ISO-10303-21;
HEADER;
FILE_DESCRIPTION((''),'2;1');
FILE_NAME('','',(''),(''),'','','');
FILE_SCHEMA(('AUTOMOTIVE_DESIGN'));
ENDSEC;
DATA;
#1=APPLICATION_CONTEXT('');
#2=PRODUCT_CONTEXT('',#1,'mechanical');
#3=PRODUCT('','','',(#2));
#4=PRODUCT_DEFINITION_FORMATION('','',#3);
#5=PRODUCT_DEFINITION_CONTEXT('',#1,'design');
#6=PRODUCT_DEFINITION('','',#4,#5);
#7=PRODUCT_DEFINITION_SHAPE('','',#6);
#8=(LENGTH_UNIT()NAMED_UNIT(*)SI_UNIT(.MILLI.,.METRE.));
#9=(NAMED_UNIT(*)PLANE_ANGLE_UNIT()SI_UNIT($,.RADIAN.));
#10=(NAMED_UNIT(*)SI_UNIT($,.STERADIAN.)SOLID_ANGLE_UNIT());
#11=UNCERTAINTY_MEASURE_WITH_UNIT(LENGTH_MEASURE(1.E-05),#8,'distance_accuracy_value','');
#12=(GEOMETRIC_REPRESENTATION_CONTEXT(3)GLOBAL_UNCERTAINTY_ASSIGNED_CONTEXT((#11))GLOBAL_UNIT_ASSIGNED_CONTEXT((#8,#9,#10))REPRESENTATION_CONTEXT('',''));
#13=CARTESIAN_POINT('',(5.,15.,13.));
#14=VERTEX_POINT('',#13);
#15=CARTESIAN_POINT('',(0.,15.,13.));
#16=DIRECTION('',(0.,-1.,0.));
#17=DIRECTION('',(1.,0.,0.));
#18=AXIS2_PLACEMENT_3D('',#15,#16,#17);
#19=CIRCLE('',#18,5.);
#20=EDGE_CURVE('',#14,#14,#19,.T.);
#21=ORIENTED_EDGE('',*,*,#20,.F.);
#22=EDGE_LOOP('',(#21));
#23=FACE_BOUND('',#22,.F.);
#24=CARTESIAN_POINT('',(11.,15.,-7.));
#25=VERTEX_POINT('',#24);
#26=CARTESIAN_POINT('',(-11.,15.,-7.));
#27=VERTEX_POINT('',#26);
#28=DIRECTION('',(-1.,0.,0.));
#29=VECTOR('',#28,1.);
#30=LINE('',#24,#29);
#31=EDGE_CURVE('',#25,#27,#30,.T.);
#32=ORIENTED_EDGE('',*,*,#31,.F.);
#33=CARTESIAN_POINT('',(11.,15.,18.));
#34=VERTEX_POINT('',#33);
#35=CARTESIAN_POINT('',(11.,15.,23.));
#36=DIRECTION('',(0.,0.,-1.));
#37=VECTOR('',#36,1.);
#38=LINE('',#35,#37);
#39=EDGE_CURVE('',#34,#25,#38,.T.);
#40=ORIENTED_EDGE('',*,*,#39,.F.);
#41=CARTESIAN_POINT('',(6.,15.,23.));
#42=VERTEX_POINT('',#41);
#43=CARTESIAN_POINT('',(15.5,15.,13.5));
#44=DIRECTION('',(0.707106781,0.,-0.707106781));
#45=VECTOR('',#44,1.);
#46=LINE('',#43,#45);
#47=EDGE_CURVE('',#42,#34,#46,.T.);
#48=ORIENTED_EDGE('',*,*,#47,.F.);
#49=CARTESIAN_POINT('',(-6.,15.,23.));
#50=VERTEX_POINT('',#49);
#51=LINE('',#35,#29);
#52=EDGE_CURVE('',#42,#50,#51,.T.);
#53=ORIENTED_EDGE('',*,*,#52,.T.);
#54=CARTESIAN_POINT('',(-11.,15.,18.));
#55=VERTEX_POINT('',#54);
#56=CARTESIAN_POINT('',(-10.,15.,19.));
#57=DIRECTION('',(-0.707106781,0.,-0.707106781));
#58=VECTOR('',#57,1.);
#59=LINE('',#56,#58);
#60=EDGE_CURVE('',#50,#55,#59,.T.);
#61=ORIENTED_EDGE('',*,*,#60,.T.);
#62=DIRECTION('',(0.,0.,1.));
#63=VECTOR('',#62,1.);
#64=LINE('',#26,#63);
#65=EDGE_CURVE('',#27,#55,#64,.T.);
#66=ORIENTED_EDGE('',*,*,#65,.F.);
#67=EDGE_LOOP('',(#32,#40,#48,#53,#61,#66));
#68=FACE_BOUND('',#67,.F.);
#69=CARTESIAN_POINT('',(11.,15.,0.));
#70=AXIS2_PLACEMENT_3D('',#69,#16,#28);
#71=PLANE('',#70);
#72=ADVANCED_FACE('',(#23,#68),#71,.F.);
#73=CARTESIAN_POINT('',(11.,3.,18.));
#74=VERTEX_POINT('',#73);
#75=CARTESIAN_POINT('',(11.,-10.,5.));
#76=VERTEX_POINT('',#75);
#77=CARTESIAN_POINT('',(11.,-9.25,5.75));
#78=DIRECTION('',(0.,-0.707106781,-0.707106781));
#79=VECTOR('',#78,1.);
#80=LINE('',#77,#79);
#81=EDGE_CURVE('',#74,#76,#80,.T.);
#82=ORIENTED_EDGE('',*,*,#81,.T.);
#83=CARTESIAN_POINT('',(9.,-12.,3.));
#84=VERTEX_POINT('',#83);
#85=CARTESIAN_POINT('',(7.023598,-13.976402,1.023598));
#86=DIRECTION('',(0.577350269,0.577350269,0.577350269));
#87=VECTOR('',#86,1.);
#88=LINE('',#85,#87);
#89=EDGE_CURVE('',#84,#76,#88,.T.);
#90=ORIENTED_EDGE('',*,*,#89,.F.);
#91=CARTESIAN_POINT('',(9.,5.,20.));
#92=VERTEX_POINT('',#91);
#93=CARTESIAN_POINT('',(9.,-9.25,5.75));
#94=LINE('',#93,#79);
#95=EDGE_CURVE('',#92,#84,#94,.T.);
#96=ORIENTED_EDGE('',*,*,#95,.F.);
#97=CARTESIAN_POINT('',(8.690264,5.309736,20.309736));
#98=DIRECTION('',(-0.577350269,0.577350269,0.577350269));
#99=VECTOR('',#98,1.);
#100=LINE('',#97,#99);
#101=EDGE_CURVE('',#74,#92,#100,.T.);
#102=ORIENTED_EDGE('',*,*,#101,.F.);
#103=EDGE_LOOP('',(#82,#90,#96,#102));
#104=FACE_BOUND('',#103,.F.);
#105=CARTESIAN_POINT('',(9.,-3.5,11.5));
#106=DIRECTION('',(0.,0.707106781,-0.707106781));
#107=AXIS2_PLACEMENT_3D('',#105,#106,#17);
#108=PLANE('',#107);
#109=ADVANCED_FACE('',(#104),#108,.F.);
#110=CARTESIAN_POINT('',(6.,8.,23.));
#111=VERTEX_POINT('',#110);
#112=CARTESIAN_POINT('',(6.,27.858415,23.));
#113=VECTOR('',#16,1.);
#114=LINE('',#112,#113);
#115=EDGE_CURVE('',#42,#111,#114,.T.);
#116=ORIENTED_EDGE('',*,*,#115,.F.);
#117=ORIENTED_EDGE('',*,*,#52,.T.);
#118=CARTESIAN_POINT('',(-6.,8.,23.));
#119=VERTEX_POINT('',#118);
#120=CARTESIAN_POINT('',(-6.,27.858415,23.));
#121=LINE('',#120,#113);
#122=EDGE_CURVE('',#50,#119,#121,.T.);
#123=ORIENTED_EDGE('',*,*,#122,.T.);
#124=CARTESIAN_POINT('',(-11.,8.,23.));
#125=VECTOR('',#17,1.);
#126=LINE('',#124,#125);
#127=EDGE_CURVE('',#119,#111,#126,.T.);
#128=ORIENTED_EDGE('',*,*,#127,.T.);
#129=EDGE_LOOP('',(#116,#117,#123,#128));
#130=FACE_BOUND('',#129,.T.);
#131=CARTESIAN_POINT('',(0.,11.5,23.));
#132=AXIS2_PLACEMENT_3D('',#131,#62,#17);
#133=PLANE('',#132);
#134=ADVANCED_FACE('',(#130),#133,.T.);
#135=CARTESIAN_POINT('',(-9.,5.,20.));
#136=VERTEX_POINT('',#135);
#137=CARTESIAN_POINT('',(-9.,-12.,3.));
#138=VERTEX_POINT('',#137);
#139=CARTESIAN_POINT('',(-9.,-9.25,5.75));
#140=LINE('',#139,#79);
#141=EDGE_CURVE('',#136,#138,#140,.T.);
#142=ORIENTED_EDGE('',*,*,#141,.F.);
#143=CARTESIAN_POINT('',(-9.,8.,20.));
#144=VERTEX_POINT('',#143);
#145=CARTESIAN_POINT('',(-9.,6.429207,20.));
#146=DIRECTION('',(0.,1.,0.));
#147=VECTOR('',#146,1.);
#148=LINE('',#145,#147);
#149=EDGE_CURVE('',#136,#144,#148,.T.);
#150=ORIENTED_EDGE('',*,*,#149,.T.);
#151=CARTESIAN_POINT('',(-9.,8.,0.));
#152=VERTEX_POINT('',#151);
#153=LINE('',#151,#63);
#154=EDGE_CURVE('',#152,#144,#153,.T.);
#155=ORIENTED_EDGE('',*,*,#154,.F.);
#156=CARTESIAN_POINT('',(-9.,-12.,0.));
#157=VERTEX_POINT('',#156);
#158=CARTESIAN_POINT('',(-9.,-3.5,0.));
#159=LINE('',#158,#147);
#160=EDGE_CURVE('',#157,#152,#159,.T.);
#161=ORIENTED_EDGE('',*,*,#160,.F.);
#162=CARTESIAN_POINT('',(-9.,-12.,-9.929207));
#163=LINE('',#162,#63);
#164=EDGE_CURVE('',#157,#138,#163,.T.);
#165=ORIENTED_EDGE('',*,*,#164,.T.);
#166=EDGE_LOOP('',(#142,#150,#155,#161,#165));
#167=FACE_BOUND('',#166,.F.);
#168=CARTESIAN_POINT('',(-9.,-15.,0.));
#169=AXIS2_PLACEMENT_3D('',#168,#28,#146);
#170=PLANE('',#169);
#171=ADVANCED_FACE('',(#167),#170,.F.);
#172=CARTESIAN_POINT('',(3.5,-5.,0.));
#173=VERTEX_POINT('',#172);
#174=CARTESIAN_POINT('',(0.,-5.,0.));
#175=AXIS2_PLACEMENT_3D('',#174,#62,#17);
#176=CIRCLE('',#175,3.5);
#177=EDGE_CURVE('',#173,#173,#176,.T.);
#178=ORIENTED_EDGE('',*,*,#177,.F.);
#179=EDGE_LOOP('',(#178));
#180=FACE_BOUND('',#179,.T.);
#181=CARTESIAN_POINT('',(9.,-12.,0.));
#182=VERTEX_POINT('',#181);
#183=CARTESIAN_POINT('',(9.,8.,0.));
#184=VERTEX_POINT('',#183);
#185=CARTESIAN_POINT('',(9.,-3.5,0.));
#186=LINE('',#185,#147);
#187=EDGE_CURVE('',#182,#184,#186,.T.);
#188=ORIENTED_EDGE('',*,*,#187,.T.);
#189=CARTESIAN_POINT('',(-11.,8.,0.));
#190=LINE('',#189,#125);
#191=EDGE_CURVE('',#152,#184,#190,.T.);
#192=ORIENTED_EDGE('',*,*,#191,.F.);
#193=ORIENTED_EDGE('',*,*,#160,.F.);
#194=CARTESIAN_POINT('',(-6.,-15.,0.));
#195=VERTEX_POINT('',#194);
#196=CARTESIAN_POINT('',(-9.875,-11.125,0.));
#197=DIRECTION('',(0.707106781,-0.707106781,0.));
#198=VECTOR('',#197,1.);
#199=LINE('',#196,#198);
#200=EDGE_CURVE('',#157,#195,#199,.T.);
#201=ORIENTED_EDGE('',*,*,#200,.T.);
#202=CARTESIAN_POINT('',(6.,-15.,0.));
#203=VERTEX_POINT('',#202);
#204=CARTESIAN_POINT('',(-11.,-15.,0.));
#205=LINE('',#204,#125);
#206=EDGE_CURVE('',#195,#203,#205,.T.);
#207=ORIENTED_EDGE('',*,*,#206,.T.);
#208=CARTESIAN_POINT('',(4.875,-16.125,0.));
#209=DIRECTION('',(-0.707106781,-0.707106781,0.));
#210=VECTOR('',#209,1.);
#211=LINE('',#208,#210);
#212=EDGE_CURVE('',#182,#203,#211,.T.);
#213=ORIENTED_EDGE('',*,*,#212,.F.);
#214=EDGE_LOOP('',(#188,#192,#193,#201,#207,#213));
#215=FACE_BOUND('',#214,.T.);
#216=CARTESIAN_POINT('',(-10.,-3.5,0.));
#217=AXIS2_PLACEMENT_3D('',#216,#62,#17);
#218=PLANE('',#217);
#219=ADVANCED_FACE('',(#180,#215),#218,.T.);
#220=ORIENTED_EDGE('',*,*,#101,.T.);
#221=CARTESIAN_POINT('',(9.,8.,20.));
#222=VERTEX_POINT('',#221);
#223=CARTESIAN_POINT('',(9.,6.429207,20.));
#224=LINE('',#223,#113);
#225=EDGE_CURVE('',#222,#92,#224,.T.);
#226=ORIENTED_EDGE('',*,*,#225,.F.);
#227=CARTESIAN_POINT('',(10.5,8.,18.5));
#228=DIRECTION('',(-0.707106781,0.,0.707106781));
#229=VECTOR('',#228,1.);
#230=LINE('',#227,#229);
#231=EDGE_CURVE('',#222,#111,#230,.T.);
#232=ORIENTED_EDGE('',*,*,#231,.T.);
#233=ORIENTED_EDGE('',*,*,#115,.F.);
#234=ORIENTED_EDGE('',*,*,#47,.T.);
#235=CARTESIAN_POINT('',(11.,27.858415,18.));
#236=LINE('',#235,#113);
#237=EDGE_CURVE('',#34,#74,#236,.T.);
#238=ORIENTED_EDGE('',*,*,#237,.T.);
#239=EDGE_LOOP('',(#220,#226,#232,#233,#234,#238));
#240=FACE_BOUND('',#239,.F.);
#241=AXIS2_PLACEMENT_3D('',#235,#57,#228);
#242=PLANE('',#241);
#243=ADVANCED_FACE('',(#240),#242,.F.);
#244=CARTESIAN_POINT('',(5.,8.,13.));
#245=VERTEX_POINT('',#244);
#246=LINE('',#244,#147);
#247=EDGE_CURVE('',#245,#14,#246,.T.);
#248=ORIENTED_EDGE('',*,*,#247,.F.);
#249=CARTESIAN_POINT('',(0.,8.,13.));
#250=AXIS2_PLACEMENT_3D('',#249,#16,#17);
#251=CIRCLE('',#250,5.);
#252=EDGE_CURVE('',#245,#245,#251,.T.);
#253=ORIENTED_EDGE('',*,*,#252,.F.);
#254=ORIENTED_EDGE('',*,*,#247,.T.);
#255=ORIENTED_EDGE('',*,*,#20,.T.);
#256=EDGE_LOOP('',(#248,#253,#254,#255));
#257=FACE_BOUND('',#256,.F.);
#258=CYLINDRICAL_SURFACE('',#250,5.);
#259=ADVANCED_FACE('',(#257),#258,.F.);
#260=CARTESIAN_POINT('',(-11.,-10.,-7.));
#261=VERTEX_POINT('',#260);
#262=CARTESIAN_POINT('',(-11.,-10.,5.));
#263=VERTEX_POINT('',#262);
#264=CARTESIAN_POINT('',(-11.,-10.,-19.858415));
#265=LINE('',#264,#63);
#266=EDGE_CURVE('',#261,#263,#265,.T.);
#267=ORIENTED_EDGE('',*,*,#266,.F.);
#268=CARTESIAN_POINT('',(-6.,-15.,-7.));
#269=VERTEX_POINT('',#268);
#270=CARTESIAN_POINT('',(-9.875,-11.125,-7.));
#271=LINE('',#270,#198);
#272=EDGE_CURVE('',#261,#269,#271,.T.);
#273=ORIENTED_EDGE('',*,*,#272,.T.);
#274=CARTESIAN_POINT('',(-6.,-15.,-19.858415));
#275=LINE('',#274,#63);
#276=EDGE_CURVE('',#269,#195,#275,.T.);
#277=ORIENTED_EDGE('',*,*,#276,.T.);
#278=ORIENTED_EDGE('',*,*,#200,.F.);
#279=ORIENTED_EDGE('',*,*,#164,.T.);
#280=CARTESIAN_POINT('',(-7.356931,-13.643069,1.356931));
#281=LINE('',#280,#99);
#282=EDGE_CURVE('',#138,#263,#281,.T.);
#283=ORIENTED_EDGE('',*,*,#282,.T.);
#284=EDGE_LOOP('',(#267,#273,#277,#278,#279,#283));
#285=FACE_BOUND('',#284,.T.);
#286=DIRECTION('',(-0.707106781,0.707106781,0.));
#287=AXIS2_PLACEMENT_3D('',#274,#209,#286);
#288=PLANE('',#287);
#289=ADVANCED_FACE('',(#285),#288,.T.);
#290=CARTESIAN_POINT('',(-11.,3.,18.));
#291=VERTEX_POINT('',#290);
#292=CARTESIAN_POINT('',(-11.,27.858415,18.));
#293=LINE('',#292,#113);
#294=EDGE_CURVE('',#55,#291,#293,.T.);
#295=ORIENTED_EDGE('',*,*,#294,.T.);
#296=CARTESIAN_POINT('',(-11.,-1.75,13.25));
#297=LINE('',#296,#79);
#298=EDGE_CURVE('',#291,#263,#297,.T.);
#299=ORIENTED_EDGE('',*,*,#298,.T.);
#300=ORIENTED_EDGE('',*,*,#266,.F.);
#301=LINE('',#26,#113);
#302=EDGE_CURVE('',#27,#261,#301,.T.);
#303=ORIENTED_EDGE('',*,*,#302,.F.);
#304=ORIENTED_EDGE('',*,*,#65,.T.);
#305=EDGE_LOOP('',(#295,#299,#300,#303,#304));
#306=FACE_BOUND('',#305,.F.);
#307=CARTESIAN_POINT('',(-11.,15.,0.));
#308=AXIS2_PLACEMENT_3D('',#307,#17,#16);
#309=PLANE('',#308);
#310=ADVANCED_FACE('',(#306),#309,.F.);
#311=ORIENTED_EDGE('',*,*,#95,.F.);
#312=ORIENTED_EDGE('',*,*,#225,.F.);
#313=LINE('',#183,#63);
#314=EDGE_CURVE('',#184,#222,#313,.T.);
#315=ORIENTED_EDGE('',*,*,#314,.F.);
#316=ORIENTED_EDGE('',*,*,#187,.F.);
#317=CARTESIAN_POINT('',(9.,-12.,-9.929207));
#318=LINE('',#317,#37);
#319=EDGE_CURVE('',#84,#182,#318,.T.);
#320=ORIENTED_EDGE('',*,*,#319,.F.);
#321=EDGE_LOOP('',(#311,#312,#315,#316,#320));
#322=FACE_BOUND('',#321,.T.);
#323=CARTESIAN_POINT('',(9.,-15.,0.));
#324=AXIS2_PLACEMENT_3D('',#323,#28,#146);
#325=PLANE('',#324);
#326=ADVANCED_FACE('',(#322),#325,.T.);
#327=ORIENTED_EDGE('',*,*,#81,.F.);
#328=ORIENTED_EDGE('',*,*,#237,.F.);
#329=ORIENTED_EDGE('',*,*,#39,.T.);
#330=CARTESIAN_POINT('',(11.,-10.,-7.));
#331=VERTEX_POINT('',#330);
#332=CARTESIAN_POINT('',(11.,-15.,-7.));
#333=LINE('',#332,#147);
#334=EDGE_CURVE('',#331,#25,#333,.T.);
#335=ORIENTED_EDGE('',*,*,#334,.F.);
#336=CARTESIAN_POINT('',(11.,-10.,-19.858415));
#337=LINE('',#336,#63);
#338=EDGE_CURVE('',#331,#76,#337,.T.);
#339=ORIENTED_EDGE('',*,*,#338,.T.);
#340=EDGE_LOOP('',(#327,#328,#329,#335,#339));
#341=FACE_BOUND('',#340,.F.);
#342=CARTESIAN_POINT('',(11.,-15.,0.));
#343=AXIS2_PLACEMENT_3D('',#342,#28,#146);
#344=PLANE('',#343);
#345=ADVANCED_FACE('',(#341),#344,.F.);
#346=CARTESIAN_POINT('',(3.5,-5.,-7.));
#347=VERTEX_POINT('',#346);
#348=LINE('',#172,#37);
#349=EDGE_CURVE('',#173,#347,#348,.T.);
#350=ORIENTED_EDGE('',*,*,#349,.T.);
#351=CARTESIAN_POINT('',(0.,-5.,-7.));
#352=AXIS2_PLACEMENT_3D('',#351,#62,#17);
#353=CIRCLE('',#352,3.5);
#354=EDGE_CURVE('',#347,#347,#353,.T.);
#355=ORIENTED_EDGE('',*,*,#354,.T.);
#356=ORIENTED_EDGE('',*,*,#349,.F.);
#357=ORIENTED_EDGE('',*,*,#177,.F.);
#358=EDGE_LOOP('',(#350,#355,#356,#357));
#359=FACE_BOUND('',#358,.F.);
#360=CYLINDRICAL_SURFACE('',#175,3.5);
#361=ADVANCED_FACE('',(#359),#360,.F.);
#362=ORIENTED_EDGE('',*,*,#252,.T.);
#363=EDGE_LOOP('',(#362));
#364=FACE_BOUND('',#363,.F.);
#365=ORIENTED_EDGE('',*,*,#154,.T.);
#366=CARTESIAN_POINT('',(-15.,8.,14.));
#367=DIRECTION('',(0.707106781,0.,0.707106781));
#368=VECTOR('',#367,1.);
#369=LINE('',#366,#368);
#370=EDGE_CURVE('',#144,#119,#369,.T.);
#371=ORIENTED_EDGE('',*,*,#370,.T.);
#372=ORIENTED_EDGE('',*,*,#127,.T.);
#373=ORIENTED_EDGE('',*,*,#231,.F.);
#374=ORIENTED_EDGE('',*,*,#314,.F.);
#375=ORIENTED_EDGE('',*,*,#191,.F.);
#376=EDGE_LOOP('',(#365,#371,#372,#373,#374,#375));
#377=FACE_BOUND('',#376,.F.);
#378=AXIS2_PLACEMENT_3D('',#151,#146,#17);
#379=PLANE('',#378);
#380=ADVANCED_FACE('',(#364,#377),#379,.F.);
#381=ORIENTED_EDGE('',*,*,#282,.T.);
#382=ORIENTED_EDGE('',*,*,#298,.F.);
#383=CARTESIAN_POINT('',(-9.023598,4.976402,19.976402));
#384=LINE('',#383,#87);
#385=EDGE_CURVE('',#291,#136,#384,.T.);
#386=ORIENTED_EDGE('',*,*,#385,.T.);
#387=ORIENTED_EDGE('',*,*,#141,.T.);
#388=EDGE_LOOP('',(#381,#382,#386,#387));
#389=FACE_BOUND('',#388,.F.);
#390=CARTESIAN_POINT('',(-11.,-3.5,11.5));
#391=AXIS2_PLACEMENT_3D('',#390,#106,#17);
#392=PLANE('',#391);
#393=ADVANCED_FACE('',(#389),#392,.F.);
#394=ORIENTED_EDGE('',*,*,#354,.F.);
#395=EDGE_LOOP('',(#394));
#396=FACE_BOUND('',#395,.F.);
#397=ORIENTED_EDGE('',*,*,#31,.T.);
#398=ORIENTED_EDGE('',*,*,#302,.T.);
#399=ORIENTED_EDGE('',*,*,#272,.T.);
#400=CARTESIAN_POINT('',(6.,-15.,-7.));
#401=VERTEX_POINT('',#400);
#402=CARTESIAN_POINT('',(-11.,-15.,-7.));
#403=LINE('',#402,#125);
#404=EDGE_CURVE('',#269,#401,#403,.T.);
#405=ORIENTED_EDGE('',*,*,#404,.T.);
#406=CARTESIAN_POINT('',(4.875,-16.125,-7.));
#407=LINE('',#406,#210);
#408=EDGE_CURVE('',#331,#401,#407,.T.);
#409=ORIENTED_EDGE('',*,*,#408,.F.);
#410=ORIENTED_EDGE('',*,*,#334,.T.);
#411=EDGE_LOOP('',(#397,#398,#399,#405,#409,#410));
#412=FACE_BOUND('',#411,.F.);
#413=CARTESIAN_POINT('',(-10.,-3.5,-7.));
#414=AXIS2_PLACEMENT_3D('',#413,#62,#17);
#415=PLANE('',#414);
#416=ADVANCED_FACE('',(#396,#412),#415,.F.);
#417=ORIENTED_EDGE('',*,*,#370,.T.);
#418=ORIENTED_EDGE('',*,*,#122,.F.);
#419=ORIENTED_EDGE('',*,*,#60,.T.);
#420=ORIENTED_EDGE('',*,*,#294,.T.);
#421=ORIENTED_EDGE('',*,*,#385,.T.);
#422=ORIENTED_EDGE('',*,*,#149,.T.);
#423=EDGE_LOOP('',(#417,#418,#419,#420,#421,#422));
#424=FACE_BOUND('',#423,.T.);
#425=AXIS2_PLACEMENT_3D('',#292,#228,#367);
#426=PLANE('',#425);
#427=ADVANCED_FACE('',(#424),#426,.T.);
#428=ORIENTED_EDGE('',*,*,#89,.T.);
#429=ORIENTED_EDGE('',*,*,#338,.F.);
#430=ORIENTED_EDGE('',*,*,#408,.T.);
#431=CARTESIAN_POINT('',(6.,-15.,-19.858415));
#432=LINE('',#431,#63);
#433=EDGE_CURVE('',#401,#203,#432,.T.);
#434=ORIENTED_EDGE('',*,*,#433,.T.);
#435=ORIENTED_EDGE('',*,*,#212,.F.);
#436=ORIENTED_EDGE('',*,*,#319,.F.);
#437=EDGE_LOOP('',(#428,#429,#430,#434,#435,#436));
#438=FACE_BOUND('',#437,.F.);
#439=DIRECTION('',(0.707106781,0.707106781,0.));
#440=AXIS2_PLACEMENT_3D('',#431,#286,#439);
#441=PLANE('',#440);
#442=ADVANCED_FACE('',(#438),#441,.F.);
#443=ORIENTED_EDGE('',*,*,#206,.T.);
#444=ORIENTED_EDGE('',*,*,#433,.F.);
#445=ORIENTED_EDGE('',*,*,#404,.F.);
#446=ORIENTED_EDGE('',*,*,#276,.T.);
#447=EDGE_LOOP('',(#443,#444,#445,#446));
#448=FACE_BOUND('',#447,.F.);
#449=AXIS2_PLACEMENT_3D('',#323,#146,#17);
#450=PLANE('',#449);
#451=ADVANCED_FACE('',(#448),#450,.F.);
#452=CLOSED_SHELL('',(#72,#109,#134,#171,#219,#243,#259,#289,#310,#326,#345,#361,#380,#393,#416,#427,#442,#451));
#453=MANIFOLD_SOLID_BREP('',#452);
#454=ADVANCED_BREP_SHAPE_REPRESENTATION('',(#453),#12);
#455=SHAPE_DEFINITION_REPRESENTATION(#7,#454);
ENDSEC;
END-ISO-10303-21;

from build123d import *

# Parameters (mm, degrees)
F0_W        = 2
F0_H        = 23
F0_W_2      = 18
F0_R        = 3.5
F1_DEPTH    = 7
F2_DEPTH    = 23
F3_R        = 5
F4_DEPTH    = 25
F5_SIZE     = 23
F6_T1_DEPTH = 32.7168298797
F6_T3_DEPTH = 32.7168298797


# Not quite as in the source:
# - a fillet or chamfer that OpenCascade refuses, or shapes differently, is made with other operations: its cross-section is extruded or revolved along the edge and cut away or added


with BuildPart() as f1:
    # F0 (on Top) → F1 (new body)
    with BuildSketch(Plane.XY):
        with Locations((-10, -3.5)):
            Rectangle(F0_W, F0_H)
        with Locations((0, -3.5)):
            Rectangle(F0_W_2, F0_H)
        with Locations((0, -5)):
            Circle(F0_R, mode=Mode.SUBTRACT)
        with Locations((10, -3.5)):
            Rectangle(F0_W, F0_H)
        Polygon((9, 8), (11, 8), (11, 15), (-11, 15), (-11, 8), (-9, 8), align=None)
    extrude(amount=-F1_DEPTH)

    # F0 (on Top) → F2 (join)
    with BuildSketch(Plane.XY):
        Polygon((9, 8), (11, 8), (11, 15), (-11, 15), (-11, 8), (-9, 8), align=None)
        with Locations((-10, -3.5)):
            Rectangle(F0_W, F0_H)
        with Locations((10, -3.5)):
            Rectangle(F0_W, F0_H)
    extrude(amount=F2_DEPTH)

    # F3 (on face) → F4 (cut)
    with BuildSketch(Plane.XZ.offset(-8)):
        with Locations((0, 13)):
            Circle(F3_R)
    extrude(amount=-F4_DEPTH, mode=Mode.SUBTRACT)

    # F5
    f5_edges = [f1.edges().sort_by_distance(p)[0] for p in [
        (10, -15, 23),
        (-10, -15, 23),
    ]]
    chamfer(f5_edges, length=F5_SIZE)

    # F6: chamfer of 5 on 4 edges, made by hand

    # F6_s2 → F6_t1 (cut)
    with BuildSketch(Plane.XY.offset(-19.8584149398)):
        Polygon((-6, -15), (-11, -10), (-11, -15), align=None)
        Polygon((6, -15), (11, -10), (11, -15), align=None)
    extrude(amount=F6_T1_DEPTH, mode=Mode.SUBTRACT)

    # F6_s4 → F6_t3 (cut)
    with BuildSketch(Plane.XZ.offset(-27.8584149398)):
        Polygon((-11, 18), (-6, 23), (-11, 23), align=None)
        Polygon((11, 18), (6, 23), (11, 23), align=None)
    extrude(amount=F6_T3_DEPTH, mode=Mode.SUBTRACT)


solid = f1.part
